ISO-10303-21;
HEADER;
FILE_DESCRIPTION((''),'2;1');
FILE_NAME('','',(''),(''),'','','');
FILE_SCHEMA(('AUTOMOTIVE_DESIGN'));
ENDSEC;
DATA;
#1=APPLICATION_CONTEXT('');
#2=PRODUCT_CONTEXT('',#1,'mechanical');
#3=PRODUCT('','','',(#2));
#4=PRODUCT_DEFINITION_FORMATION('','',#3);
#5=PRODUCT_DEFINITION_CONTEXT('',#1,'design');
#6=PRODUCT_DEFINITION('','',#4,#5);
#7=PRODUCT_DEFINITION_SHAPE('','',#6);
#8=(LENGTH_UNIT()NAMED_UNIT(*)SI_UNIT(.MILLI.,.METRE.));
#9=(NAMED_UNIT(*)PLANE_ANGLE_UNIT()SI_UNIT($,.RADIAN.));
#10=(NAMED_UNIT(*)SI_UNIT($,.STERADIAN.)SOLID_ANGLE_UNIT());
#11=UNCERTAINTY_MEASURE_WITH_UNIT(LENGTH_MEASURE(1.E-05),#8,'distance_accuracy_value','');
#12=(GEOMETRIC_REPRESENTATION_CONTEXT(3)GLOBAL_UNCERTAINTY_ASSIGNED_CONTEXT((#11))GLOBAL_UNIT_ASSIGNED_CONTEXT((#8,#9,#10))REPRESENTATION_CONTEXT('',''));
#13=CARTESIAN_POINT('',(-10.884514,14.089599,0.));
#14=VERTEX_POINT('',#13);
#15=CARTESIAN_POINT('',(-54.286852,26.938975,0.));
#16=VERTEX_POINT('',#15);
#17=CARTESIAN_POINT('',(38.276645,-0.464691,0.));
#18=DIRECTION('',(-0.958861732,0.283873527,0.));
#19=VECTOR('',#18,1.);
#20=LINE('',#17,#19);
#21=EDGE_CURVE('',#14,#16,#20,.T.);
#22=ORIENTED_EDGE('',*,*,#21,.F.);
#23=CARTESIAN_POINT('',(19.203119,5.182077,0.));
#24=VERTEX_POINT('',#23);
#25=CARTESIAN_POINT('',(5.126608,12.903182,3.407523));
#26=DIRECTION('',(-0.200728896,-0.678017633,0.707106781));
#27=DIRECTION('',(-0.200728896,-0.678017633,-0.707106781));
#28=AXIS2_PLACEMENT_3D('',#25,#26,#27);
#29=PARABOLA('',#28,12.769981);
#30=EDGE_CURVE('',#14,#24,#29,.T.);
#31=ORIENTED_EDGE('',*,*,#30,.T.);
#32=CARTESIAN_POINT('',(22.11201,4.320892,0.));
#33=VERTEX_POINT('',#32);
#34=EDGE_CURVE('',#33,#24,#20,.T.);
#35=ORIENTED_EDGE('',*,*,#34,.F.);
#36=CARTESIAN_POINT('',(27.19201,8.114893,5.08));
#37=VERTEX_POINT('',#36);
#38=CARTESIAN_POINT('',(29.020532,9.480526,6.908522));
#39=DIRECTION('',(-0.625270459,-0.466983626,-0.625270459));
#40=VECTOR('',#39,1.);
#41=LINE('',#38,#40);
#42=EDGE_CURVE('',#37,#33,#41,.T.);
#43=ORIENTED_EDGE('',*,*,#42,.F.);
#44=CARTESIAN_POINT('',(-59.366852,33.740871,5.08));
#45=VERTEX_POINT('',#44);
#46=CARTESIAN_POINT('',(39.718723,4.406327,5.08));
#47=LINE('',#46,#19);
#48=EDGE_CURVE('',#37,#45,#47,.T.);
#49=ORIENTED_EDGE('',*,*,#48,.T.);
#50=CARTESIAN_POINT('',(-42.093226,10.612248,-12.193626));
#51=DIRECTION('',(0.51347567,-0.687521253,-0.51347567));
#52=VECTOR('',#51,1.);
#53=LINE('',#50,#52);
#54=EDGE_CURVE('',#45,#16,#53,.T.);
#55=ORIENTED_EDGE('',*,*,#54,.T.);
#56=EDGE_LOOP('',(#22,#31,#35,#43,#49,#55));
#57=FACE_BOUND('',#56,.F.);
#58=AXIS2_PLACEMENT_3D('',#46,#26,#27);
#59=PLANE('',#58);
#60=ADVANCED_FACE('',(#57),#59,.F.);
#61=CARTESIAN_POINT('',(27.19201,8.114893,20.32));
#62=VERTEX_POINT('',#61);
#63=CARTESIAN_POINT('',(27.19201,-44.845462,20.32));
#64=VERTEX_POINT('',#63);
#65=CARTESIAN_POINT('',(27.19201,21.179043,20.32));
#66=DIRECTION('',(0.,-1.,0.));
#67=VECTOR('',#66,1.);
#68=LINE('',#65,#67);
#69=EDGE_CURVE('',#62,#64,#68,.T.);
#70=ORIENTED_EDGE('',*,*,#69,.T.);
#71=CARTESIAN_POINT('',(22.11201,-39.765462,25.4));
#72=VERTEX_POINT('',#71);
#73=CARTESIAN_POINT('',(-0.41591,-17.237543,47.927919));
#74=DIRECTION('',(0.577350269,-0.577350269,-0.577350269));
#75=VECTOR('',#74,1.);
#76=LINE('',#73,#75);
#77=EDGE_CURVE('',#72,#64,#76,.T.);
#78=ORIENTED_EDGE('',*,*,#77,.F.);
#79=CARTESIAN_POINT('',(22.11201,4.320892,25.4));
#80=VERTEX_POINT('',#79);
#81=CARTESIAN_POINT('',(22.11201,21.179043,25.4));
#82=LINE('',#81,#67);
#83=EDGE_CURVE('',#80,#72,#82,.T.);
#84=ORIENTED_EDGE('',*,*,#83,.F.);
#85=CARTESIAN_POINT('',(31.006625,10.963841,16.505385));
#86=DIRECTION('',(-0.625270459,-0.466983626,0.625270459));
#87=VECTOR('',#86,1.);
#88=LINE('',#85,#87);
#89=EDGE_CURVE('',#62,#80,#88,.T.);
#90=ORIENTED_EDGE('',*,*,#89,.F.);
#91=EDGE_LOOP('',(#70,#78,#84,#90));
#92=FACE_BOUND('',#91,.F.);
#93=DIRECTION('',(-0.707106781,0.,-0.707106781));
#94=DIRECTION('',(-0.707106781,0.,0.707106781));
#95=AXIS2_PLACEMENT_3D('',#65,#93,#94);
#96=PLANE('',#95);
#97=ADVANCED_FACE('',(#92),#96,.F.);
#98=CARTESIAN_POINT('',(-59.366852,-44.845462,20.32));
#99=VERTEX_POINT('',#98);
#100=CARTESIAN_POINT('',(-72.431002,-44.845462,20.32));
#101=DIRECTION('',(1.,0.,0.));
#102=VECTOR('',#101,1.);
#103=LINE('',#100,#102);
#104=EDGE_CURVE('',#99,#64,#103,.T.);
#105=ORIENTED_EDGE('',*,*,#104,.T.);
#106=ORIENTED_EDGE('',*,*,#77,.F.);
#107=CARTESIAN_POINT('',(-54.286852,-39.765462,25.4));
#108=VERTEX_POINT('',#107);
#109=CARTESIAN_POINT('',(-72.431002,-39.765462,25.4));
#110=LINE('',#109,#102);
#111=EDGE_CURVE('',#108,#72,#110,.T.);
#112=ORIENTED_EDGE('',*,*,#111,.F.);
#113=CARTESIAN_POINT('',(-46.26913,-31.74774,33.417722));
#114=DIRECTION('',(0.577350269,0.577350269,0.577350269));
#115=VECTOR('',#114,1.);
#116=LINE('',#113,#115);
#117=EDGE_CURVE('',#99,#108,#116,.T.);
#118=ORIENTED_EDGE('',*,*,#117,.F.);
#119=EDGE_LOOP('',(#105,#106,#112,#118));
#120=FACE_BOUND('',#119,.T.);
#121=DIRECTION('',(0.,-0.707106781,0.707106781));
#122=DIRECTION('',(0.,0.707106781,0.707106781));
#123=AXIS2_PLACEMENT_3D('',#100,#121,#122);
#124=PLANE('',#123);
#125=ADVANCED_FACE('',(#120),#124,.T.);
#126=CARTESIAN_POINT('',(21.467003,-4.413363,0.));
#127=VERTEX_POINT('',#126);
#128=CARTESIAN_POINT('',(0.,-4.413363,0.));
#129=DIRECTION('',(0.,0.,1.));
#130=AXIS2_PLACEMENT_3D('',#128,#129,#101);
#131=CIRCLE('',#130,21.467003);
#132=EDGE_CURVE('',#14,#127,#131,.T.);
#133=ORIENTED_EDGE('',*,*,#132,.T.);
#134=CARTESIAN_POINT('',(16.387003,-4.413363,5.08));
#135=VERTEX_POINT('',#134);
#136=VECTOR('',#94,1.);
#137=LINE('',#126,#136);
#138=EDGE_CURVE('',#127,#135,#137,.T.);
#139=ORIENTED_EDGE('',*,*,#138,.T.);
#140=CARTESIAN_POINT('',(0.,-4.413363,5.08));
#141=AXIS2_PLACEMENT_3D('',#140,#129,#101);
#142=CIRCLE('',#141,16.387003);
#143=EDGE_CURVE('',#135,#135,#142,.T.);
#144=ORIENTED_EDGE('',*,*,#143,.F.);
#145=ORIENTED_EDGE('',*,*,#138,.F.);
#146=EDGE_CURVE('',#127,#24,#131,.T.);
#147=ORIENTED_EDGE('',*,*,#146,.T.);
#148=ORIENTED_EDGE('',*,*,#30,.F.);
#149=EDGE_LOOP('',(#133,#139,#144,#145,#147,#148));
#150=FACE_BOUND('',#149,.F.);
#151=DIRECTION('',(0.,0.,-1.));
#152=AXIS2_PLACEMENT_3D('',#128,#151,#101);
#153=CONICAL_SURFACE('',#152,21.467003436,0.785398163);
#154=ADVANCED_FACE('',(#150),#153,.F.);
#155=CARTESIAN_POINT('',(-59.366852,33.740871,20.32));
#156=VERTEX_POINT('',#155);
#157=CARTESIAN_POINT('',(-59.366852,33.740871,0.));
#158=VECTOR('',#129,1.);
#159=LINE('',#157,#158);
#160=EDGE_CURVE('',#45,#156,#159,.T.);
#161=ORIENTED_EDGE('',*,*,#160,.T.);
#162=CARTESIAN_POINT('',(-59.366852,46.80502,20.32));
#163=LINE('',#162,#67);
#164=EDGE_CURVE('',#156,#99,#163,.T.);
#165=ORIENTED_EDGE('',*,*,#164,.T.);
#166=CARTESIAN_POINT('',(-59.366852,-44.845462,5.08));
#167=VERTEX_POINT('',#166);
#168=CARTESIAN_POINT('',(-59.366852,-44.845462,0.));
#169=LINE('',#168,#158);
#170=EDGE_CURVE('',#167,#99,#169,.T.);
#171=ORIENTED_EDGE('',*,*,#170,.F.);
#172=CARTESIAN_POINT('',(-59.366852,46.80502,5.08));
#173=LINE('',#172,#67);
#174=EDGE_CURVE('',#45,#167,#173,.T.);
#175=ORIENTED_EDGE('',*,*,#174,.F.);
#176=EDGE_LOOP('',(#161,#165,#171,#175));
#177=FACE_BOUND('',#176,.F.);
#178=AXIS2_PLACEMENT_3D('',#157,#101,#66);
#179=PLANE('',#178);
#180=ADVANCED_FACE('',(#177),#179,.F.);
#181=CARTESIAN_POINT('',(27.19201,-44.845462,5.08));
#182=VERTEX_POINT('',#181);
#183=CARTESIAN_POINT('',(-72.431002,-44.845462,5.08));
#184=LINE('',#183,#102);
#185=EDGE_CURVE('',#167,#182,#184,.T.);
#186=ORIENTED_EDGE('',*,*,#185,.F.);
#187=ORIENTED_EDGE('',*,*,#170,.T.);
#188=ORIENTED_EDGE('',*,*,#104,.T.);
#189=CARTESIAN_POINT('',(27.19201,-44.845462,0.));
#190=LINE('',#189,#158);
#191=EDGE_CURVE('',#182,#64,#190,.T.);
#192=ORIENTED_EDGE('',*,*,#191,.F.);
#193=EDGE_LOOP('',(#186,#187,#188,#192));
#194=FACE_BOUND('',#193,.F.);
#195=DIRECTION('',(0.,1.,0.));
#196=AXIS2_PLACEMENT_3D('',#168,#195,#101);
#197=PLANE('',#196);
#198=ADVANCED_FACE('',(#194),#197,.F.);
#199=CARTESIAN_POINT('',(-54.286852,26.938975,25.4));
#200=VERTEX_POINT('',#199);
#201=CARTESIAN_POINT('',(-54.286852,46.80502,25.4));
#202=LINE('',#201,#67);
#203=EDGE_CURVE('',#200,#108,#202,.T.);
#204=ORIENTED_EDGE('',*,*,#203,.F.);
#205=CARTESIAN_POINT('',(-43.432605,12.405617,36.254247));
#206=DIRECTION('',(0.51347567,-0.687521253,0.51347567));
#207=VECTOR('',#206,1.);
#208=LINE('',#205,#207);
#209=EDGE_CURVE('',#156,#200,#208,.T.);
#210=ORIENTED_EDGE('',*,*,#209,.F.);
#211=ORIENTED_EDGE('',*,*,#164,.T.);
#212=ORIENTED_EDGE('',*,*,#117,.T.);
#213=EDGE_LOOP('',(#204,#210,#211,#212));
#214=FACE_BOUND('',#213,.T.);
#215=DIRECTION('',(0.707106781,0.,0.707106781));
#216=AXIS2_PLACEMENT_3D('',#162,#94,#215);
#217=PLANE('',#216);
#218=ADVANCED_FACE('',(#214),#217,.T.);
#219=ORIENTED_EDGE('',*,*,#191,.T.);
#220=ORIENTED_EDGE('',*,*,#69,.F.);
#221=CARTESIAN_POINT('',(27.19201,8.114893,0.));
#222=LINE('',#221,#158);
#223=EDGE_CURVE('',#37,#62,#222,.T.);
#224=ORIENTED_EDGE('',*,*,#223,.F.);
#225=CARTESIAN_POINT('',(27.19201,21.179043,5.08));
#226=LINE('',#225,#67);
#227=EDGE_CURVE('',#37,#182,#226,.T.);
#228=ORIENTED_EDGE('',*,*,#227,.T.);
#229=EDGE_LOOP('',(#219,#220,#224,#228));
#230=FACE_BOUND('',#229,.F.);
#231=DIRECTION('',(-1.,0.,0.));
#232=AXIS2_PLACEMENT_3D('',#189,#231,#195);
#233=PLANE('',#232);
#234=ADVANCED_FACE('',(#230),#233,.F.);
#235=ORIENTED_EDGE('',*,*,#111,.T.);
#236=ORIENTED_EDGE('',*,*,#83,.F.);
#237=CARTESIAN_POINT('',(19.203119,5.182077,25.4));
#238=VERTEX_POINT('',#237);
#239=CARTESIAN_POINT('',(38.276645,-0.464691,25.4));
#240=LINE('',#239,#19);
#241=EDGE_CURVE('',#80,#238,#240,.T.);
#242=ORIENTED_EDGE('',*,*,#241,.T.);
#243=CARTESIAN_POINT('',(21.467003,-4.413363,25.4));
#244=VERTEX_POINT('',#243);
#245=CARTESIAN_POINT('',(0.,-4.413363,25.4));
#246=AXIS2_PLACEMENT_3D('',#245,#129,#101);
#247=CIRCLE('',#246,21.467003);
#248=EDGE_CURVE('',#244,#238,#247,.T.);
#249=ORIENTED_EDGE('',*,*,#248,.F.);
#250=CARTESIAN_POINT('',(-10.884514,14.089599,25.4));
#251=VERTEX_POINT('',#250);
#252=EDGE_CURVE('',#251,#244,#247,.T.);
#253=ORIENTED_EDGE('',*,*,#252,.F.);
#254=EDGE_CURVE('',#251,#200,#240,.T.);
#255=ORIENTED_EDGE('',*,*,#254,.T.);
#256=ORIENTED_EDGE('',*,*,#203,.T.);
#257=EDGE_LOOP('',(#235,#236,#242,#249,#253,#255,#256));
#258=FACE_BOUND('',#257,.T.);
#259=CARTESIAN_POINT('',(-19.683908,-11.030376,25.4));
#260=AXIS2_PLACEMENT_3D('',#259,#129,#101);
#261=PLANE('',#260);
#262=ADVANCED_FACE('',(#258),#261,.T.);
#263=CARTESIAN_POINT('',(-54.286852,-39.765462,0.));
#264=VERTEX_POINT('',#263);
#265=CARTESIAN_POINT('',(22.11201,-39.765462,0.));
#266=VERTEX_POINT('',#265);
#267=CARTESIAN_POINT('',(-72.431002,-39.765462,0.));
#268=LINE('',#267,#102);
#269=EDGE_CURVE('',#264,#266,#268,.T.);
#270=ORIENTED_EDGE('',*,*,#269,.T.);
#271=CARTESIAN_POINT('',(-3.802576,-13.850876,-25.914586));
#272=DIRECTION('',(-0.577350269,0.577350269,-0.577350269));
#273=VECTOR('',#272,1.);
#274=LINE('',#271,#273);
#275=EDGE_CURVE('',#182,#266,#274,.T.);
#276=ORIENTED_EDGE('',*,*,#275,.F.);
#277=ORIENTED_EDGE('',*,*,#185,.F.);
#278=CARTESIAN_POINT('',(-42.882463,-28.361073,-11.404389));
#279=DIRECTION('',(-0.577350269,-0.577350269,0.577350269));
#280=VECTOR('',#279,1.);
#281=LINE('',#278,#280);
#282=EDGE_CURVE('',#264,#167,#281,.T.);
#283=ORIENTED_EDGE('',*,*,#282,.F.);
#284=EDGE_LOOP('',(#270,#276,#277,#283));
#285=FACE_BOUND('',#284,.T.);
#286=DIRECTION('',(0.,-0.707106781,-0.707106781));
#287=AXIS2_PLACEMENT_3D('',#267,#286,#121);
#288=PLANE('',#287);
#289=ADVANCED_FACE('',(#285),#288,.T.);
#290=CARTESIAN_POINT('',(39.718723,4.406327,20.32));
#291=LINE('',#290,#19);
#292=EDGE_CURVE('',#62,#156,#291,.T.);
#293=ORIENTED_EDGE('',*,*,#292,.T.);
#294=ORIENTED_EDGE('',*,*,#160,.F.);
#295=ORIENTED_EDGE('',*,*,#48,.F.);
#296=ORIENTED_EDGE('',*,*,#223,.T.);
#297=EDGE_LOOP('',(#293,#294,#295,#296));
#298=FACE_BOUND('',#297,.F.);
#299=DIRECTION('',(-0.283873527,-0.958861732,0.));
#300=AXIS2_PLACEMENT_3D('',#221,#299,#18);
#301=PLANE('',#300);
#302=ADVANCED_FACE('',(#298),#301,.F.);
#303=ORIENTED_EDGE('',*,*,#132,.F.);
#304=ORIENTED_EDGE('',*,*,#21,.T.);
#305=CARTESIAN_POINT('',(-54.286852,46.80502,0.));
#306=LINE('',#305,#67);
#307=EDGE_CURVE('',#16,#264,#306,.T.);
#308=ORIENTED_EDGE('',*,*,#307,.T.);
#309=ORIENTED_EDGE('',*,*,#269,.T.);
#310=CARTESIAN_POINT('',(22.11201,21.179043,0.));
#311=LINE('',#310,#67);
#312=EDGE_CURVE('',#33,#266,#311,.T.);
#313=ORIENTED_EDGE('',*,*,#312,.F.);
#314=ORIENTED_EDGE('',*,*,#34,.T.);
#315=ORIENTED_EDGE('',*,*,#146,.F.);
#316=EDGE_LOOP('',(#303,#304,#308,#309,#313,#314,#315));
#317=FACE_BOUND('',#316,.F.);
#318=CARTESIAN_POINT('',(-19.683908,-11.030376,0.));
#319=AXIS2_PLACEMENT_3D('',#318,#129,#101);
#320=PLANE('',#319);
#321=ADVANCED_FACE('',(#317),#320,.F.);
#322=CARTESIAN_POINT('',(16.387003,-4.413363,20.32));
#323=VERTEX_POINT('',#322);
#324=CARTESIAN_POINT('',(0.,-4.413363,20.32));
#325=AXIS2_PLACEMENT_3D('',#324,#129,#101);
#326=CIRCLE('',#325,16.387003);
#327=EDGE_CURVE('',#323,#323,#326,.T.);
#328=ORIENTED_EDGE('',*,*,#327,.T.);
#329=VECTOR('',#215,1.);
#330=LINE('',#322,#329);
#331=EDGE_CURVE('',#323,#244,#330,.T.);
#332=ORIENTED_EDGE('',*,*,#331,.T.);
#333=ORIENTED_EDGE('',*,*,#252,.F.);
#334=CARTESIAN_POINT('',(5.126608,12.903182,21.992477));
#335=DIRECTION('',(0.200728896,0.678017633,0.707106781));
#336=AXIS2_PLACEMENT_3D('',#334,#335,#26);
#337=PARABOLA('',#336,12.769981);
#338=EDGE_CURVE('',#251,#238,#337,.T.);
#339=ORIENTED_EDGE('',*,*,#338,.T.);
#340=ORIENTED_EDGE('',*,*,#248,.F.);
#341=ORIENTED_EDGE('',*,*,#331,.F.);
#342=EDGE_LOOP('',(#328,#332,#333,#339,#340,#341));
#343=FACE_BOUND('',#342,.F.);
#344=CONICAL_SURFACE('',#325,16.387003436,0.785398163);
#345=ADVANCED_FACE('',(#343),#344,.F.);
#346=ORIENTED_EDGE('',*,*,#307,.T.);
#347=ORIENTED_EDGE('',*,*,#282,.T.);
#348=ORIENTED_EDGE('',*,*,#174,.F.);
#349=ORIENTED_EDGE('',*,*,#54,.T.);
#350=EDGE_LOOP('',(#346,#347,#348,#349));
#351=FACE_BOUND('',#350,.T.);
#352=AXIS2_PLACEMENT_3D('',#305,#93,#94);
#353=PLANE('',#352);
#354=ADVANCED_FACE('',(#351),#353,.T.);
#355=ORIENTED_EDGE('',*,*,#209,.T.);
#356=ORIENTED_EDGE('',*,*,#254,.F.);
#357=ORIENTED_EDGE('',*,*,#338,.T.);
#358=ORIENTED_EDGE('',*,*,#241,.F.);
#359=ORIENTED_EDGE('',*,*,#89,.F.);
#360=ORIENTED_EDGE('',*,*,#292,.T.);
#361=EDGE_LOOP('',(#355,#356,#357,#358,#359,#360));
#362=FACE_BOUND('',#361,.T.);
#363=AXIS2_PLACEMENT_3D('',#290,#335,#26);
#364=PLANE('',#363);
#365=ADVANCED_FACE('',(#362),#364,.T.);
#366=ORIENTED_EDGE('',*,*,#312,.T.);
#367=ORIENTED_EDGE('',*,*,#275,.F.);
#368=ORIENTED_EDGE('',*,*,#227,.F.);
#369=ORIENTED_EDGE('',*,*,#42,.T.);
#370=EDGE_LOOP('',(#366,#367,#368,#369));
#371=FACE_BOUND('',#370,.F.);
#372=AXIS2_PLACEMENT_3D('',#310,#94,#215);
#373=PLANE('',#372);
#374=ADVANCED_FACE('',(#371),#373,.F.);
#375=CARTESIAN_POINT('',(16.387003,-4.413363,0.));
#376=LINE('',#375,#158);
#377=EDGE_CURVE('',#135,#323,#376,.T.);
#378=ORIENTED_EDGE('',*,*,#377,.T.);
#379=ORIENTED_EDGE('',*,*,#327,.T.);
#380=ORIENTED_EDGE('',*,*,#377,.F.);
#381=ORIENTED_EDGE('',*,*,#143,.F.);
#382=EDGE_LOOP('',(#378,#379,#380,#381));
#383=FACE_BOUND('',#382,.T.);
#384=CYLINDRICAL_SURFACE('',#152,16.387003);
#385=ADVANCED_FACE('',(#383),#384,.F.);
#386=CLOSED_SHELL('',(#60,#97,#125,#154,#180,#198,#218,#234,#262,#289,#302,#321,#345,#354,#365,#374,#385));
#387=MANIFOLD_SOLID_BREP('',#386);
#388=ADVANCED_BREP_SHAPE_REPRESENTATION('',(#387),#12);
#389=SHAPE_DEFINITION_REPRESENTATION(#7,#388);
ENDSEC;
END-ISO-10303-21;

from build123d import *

# Parameters (mm, degrees)
F0_R        = 16.3870034363
F1_DEPTH    = 25.4
F2_T1_DEPTH = 116.4008158105
F2_T3_DEPTH = 104.7146316577
F2_T5_DEPTH = 112.6871608157
F2_T7_DEPTH = 79.0886539925
F3_T1_DEPTH = 116.4008158105
F3_T3_DEPTH = 104.7146316577
F3_T5_DEPTH = 112.6871608157
F3_T7_DEPTH = 79.0886539925


# Not quite as in the source:
# - a fillet or chamfer that OpenCascade refuses, or shapes differently, is made with other operations: its cross-section is extruded or revolved along the edge and cut away or added


with BuildPart() as f1:
    # F0 (on Top) → F1 (new body)
    with BuildSketch(Plane.XY):
        Polygon((27.1920096129, 8.1148929894), (-59.3668520451, 33.7408706546), (-59.3668520451, -44.8454618454), (27.1920096129, -44.8454618454), align=None)
        with Locations((0, -4.4133625925)):
            Circle(F0_R, mode=Mode.SUBTRACT)
    extrude(amount=F1_DEPTH)

    # F2: chamfer of 5.08 on 5 edges, made by hand

    # F2_s2 → F2_t1 (cut)
    with BuildSketch(Plane(origin=(35.3186398876, -10.4561758275, 0), x_dir=(0, 0, 1), z_dir=(-0.9588617319, 0.2838735267, 0))):
        Polygon((20.32, 15.5001520123), (25.4, 10.4201520123), (25.4, 15.5001520123), align=None)
    extrude(amount=F2_T1_DEPTH, mode=Mode.SUBTRACT)

    # F2_s4 → F2_t3 (cut)
    with BuildSketch(Plane.XZ.offset(-46.8050202334)):
        Polygon((-59.3668520451, 20.32), (-54.2868520451, 25.4), (-59.3668520451, 25.4), align=None)
    extrude(amount=F2_T3_DEPTH, mode=Mode.SUBTRACT)

    # F2_s6 → F2_t5 (cut)
    with BuildSketch(Plane.YZ.offset(-72.4310016239)):
        Polygon((-44.8454618454, 20.32), (-39.7654618454, 25.4), (-44.8454618454, 25.4), align=None)
    extrude(amount=F2_T5_DEPTH, mode=Mode.SUBTRACT)

    # F2_s8 → F2_t7 (cut)
    with BuildSketch(Plane.XZ.offset(-21.1790425683)):
        Polygon((27.1920096129, 20.32), (22.1120096129, 25.4), (27.1920096129, 25.4), align=None)
    extrude(amount=F2_T7_DEPTH, mode=Mode.SUBTRACT)

    # F2_s9 → F2_t10 (revolve, cut)
    with BuildSketch(Plane.XZ.offset(4.4133625925)):
        Polygon((16.3870034363, 20.32), (21.4670034363, 25.4), (16.3870034363, 25.4), align=None)
    revolve(axis=Axis((0, -4.4133625925, 25.4), (0, 0, 1)), mode=Mode.SUBTRACT)

    # F3: chamfer of 5.08 on 5 edges, made by hand

    # F3_s2 → F3_t1 (cut)
    with BuildSketch(Plane(origin=(35.3186398876, -10.4561758275, 0), x_dir=(0, 0, 1), z_dir=(-0.9588617319, 0.2838735267, 0))):
        Polygon((5.08, 15.5001520123), (0, 10.4201520123), (0, 15.5001520123), align=None)
    extrude(amount=F3_T1_DEPTH, mode=Mode.SUBTRACT)

    # F3_s4 → F3_t3 (cut)
    with BuildSketch(Plane.XZ.offset(-46.8050202334)):
        Polygon((-54.2868520451, 0), (-59.3668520451, 5.08), (-59.3668520451, 0), align=None)
    extrude(amount=F3_T3_DEPTH, mode=Mode.SUBTRACT)

    # F3_s6 → F3_t5 (cut)
    with BuildSketch(Plane.YZ.offset(-72.4310016239)):
        Polygon((-39.7654618454, 0), (-44.8454618454, 5.08), (-44.8454618454, 0), align=None)
    extrude(amount=F3_T5_DEPTH, mode=Mode.SUBTRACT)

    # F3_s8 → F3_t7 (cut)
    with BuildSketch(Plane.XZ.offset(-21.1790425683)):
        Polygon((22.1120096129, 0), (27.1920096129, 5.08), (27.1920096129, 0), align=None)
    extrude(amount=F3_T7_DEPTH, mode=Mode.SUBTRACT)

    # F3_s9 → F3_t10 (revolve, cut)
    with BuildSketch(Plane.XZ.offset(4.4133625925)):
        Polygon((21.4670034363, 0), (16.3870034363, 5.08), (16.3870034363, 0), align=None)
    revolve(axis=Axis((0, -4.4133625925, 0), (0, 0, 1)), mode=Mode.SUBTRACT)


solid = f1.part
